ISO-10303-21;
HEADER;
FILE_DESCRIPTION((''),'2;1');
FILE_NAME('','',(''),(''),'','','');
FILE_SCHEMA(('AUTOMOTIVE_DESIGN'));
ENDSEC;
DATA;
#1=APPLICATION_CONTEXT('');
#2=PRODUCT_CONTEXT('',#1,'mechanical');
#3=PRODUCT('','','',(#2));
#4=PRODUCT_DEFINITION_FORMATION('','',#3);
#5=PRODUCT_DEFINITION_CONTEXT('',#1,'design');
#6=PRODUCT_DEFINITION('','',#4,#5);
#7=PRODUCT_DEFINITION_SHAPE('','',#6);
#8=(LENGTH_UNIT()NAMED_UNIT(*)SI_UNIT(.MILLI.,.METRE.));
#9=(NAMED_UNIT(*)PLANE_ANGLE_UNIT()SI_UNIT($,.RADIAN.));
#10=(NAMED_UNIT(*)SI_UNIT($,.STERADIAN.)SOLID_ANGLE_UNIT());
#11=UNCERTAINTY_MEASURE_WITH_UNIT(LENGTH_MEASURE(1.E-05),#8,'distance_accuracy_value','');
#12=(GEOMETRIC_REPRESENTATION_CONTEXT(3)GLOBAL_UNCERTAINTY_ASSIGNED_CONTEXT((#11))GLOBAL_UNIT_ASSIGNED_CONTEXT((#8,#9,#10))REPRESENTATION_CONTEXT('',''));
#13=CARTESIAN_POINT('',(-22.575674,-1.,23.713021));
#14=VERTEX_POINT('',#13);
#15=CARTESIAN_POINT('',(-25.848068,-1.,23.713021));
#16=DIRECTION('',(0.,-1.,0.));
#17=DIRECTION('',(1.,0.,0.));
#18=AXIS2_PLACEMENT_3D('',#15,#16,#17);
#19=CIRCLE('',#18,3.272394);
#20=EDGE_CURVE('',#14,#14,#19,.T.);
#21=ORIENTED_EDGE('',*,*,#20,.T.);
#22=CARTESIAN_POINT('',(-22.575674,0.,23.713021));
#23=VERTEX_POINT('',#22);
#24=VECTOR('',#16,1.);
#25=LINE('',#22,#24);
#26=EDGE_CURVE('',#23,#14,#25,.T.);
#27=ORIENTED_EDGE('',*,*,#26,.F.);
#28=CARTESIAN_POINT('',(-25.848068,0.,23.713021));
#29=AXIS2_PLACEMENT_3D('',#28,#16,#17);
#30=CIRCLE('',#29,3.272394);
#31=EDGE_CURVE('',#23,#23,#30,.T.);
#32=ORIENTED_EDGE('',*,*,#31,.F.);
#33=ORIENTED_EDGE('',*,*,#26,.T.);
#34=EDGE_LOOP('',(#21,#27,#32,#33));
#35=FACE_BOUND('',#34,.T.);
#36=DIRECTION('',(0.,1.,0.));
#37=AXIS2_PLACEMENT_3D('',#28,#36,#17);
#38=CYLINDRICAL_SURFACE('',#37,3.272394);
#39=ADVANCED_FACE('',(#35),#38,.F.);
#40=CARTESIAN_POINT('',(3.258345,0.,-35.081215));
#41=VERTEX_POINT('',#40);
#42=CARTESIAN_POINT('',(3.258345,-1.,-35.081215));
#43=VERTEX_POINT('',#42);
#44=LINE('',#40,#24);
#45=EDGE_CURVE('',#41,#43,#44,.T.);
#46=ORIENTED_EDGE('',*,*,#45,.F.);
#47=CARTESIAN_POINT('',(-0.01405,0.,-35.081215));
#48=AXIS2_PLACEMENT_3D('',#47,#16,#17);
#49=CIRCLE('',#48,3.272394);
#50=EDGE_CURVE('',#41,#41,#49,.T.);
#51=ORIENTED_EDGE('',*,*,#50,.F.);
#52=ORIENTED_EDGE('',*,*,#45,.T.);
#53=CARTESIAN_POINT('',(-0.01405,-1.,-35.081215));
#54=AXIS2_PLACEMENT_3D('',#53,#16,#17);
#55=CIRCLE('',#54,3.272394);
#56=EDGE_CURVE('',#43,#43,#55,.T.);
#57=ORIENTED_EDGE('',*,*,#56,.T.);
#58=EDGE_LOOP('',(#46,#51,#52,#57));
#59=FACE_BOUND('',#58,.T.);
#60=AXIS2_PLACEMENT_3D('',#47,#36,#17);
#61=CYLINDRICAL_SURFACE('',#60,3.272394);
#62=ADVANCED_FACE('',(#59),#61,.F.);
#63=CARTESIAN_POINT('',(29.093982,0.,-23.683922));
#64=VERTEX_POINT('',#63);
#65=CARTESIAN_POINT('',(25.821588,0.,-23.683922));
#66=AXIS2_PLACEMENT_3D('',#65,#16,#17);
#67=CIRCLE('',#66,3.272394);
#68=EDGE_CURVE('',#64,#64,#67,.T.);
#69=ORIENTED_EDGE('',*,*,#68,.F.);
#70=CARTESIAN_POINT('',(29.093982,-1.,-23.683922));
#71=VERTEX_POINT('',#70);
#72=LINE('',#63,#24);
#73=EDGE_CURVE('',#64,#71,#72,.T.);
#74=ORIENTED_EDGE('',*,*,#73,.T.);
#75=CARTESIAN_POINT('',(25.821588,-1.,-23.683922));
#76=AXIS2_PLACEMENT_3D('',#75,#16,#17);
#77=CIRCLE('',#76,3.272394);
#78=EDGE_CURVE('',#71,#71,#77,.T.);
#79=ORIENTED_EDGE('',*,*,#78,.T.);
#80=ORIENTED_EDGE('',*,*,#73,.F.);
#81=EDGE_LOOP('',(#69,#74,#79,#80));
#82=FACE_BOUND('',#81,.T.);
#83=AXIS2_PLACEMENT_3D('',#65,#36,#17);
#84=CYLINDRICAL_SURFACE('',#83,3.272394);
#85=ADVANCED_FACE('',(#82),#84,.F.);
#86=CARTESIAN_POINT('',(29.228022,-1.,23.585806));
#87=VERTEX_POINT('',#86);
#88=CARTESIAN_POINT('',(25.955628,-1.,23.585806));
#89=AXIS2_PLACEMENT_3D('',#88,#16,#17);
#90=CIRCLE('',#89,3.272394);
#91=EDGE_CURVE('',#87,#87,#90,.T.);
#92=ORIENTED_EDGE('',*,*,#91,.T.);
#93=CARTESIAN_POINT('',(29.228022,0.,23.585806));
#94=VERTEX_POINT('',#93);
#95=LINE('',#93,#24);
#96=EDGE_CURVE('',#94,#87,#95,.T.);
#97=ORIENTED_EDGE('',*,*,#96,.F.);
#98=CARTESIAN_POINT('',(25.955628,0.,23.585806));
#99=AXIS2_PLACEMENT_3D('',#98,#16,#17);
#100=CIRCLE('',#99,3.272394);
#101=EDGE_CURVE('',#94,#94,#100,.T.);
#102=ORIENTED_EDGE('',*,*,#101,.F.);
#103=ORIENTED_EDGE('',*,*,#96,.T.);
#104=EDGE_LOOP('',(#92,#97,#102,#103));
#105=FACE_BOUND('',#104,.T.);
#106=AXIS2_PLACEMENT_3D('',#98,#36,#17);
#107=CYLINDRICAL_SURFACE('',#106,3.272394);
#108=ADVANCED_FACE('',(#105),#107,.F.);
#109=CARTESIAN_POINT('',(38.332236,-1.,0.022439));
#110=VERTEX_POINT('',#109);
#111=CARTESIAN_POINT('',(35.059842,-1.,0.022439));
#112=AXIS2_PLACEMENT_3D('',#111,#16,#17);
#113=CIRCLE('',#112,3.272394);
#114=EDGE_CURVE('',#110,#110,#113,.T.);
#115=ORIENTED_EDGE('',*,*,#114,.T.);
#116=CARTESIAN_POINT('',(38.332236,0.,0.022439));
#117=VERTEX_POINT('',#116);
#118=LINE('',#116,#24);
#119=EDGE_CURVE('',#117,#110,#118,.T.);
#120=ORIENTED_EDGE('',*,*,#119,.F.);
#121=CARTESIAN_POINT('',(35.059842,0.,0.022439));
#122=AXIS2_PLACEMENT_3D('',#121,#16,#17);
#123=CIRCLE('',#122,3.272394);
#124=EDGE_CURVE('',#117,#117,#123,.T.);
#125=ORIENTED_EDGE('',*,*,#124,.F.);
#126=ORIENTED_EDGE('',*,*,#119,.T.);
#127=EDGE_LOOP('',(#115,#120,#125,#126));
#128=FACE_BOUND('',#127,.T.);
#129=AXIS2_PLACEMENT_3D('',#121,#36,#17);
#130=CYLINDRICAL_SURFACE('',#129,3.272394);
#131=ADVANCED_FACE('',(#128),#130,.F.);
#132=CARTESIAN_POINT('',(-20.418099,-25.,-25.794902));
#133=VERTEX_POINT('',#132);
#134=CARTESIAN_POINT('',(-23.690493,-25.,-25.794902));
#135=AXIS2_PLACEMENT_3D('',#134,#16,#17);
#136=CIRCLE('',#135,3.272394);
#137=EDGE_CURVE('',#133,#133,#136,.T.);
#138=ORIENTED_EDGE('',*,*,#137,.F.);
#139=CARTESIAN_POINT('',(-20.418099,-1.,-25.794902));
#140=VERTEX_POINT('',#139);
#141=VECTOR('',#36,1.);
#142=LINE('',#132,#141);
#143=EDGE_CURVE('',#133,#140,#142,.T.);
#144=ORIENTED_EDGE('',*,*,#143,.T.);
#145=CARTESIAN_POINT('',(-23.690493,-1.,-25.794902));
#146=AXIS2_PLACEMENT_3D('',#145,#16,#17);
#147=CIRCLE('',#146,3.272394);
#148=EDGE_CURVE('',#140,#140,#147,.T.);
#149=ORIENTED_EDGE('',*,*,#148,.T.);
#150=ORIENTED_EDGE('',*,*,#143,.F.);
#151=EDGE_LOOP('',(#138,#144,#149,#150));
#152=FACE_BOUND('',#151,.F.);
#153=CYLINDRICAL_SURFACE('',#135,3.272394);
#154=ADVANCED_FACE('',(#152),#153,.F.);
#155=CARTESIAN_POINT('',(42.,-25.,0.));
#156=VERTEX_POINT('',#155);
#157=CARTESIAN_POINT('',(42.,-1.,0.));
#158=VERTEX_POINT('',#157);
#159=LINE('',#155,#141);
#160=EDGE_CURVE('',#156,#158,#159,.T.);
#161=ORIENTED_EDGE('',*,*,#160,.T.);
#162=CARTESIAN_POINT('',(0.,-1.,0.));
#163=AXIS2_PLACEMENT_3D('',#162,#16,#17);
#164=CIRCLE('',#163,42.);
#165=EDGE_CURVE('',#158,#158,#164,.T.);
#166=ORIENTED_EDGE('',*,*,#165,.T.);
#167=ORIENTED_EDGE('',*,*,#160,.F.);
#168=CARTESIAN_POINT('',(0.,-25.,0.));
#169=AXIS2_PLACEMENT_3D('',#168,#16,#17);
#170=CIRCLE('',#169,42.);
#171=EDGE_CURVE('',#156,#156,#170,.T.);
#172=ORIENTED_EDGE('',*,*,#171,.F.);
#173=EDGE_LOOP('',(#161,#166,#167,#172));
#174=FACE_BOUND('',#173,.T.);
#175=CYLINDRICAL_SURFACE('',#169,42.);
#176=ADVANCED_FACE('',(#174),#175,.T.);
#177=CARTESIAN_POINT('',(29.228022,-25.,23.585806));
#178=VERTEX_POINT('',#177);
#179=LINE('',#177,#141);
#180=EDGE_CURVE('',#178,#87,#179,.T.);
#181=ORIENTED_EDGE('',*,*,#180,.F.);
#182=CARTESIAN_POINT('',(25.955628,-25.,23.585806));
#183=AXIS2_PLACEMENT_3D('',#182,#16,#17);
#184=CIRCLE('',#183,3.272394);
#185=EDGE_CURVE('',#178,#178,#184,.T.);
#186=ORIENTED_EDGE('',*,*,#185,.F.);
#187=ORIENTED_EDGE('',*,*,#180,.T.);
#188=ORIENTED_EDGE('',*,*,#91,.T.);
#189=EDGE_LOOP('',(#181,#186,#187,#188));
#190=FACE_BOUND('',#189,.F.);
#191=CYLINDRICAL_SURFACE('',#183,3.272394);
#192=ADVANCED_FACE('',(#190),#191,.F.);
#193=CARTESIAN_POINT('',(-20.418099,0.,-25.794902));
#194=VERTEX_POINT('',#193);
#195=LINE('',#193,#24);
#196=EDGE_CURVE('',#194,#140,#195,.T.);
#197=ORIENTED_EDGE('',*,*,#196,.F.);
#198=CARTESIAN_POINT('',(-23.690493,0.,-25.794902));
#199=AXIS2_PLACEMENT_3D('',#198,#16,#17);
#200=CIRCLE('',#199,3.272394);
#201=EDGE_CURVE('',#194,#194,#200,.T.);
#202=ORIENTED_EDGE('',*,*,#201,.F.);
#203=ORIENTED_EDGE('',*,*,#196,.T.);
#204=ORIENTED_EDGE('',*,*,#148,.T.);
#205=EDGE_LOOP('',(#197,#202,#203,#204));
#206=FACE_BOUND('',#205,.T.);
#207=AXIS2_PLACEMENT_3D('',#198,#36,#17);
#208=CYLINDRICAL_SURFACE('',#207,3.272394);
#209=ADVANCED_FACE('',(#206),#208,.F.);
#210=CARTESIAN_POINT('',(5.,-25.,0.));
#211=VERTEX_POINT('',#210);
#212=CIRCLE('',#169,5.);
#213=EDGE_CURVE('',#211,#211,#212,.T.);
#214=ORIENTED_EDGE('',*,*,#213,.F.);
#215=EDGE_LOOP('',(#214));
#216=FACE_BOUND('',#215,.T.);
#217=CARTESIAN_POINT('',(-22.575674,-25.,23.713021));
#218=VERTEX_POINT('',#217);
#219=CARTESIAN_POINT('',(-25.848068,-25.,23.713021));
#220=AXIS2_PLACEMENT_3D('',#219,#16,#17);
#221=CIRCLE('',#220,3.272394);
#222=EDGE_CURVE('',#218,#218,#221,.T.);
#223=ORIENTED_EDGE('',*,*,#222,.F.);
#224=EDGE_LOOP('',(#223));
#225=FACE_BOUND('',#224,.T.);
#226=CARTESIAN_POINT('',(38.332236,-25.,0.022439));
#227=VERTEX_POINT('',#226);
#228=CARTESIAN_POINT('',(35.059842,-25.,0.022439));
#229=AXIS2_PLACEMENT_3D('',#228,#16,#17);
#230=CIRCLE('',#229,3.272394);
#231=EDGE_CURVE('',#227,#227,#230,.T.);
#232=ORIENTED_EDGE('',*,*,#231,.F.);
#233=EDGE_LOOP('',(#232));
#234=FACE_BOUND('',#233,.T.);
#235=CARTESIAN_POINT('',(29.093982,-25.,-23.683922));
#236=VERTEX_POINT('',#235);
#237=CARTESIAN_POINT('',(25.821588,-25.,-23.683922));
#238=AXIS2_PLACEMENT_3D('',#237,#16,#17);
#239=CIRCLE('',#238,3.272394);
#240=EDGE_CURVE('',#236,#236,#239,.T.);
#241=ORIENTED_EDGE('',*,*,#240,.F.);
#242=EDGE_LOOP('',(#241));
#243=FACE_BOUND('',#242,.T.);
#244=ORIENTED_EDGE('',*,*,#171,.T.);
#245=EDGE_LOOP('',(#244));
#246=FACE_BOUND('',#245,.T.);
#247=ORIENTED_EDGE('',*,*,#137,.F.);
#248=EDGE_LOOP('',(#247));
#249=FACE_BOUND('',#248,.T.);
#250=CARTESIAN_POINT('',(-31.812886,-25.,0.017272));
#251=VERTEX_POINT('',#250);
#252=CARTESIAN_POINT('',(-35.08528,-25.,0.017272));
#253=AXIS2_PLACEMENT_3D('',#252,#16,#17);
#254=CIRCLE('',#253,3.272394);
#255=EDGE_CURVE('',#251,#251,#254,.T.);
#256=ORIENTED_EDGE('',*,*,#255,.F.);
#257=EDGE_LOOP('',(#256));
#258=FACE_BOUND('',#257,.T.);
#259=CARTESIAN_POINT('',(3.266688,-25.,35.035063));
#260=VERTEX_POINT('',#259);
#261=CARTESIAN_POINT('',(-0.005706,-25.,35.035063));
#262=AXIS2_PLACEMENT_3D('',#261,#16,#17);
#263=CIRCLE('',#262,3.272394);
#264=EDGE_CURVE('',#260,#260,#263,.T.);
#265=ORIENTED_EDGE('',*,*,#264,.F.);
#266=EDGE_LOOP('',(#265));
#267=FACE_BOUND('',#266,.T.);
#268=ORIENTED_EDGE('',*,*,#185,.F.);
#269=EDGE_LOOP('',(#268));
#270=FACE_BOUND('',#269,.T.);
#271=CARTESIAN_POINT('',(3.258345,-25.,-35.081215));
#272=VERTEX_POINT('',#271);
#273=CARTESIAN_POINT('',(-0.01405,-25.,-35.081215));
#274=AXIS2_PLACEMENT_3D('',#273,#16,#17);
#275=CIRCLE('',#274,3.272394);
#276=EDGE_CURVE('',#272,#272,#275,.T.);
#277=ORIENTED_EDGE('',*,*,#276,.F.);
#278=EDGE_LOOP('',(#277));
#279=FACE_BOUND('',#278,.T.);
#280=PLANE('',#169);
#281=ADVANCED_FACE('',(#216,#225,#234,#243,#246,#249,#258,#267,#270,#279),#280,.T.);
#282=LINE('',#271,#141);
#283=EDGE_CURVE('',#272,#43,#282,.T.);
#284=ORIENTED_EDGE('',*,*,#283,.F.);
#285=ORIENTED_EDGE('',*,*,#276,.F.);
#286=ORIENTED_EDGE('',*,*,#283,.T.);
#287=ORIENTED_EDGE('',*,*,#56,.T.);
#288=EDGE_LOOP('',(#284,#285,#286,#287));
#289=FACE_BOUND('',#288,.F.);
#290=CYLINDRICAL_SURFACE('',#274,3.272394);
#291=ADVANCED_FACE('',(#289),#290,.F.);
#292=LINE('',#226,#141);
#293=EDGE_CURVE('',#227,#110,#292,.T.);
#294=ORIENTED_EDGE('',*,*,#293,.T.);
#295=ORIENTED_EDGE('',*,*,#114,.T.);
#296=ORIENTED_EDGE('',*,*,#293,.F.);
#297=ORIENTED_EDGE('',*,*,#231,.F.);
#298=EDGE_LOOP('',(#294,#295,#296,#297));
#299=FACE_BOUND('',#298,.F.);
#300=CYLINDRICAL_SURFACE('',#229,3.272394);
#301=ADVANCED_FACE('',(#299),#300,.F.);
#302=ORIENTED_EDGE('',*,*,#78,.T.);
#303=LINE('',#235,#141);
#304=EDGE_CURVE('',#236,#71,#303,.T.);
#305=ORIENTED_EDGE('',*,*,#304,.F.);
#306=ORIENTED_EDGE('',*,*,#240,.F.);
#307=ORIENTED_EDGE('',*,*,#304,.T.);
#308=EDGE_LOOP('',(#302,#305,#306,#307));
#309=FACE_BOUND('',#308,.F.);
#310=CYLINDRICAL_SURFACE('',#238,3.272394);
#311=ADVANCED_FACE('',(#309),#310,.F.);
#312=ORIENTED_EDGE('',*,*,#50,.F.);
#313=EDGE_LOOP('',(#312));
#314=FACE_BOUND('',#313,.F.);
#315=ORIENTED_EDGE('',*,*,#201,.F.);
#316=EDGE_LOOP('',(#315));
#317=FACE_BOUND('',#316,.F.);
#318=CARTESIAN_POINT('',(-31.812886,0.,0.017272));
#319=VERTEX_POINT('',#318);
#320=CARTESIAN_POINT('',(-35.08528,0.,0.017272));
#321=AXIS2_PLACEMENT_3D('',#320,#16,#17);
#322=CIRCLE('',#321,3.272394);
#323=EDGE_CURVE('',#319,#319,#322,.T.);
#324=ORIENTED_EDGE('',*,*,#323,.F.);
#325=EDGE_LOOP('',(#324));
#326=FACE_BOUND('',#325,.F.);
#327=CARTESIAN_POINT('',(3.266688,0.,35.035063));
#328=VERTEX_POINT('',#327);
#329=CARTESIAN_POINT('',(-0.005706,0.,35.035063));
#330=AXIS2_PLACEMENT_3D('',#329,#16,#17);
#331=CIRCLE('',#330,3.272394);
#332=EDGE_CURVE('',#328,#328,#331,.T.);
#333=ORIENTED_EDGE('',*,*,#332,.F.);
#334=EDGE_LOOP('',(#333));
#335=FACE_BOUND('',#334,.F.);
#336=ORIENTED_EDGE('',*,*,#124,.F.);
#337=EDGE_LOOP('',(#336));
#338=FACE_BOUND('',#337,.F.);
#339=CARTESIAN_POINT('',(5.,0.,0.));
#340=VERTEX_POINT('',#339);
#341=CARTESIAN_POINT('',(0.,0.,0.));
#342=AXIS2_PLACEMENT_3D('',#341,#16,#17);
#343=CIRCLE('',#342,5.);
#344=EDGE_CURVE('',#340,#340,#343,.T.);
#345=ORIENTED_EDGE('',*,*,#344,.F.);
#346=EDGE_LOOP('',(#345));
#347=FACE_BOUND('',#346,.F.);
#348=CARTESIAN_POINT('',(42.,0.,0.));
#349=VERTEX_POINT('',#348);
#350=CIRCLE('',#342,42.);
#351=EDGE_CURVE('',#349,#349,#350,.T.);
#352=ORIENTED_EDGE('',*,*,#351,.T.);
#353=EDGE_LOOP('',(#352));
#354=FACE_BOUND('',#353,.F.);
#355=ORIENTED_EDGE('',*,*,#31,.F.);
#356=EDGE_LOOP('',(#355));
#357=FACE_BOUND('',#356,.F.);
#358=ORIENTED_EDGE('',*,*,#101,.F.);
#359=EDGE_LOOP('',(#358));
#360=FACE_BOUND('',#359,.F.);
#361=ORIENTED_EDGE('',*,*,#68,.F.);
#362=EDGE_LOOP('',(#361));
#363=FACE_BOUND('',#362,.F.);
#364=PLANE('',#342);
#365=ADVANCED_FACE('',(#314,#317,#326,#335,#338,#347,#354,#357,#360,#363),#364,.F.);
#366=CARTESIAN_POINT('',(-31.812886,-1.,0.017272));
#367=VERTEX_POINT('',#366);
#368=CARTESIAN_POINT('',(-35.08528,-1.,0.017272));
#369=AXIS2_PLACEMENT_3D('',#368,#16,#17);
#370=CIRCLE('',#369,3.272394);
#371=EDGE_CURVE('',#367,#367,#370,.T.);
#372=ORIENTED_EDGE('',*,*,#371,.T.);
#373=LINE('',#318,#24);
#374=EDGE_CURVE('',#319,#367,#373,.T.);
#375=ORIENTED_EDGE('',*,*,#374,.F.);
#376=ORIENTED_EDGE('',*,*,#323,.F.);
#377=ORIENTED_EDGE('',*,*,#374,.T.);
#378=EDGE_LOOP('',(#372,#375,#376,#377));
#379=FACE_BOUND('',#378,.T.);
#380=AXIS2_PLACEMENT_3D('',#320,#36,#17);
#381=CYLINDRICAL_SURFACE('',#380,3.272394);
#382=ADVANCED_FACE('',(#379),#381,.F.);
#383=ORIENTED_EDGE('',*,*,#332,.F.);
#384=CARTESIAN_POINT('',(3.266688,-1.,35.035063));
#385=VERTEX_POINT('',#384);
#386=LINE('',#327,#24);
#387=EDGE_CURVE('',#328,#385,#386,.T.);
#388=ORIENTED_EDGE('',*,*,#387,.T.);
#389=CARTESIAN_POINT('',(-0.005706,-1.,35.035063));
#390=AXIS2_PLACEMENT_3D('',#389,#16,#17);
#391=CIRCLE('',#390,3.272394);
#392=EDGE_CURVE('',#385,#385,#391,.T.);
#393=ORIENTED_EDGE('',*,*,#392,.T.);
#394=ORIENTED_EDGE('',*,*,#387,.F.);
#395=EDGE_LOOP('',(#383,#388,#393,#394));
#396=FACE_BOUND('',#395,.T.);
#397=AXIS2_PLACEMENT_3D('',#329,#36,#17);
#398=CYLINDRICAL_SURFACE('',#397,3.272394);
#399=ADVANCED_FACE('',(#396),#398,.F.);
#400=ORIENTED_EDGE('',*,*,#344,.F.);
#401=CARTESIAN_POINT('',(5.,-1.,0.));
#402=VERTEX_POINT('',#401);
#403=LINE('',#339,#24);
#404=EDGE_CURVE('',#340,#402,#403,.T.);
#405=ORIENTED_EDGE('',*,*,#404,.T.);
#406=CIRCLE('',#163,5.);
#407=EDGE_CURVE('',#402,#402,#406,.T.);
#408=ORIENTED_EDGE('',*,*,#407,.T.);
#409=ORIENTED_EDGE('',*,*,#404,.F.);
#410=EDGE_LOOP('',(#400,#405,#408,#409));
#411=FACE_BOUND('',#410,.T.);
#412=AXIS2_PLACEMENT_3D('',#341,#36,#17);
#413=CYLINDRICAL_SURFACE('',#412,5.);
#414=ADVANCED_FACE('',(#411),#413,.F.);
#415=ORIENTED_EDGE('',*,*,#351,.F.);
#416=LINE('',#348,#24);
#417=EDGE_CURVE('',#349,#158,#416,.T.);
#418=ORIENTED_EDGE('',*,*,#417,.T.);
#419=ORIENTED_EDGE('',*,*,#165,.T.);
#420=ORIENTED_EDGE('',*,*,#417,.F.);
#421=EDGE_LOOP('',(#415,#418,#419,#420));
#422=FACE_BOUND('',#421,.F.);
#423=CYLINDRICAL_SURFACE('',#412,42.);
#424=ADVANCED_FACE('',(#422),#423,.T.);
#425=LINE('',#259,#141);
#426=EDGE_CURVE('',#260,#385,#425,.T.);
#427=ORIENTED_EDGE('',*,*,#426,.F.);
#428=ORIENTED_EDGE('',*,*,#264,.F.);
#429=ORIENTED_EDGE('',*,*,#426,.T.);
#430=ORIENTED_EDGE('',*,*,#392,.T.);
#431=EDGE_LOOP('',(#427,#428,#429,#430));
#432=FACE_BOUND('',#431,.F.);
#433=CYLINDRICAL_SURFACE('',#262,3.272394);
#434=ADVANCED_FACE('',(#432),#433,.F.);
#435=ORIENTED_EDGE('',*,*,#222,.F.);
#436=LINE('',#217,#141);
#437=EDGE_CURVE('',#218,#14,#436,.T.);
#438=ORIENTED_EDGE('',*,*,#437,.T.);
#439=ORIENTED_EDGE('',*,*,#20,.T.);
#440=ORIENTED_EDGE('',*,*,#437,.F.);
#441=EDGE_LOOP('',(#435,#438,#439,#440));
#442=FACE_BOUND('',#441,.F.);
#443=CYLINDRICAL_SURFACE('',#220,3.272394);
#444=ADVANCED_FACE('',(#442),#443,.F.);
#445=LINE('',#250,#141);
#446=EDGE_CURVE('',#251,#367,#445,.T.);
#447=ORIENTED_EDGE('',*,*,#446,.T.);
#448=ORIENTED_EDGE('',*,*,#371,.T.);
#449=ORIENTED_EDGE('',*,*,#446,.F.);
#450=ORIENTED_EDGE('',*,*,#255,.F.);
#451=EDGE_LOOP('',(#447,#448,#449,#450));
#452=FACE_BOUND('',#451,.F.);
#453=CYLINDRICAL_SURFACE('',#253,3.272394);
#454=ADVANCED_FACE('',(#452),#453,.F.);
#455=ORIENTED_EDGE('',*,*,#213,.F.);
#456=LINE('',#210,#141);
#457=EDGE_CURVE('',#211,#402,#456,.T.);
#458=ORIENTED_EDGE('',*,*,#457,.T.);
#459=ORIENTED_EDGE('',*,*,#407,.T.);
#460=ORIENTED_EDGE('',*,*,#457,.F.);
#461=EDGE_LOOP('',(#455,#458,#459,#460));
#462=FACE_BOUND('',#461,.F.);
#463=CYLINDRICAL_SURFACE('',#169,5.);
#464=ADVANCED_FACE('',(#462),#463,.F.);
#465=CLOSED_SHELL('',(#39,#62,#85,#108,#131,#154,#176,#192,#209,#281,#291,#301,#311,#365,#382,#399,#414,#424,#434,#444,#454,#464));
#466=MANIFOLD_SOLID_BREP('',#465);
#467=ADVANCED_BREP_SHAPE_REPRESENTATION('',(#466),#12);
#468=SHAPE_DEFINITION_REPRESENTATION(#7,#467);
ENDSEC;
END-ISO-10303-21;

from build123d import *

# Parameters (mm, degrees)
F0_R     = 42
F0_R_2   = 3.2723941489
F0_R_3   = 15
F0_R_4   = 8.75
F1_DEPTH = 25
F0_R_5   = 5
F2_DEPTH = 25
F7_DEPTH = 24


# Not quite as in the source:
# - the program builds the solid bodies; features that only make, move or delete a surface that nothing else refers to are left out


with BuildPart() as f1:
    # F0 (on Front) → F1 (new body)
    with BuildSketch(Plane.XZ):
        Circle(F0_R)
        with Locations((-23.6904930325, -25.7949024873)):
            Circle(F0_R_2, mode=Mode.SUBTRACT)
        with Locations((-0.0140495196, -35.0812149592)):
            Circle(F0_R_2, mode=Mode.SUBTRACT)
        with Locations((25.8215879073, -23.6839220737)):
            Circle(F0_R_2, mode=Mode.SUBTRACT)
        with Locations((-35.0852801235, 0.0172716529)):
            Circle(F0_R_2, mode=Mode.SUBTRACT)
        with Locations((-25.8480679978, 23.7130210266)):
            Circle(F0_R_2, mode=Mode.SUBTRACT)
        with Locations((-0.0057062035, 35.0350632497)):
            Circle(F0_R_2, mode=Mode.SUBTRACT)
        Circle(F0_R_3, mode=Mode.SUBTRACT)
        with Locations((35.0598417296, 0.0224386821)):
            Circle(F0_R_2, mode=Mode.SUBTRACT)
        with Locations((25.9556279527, 23.5858062447)):
            Circle(F0_R_2, mode=Mode.SUBTRACT)
        Circle(F0_R_3)
        Circle(F0_R_4, mode=Mode.SUBTRACT)
    extrude(amount=F1_DEPTH)

    # F0 (on Front) → F2 (join)
    with BuildSketch(Plane.XZ):
        Circle(F0_R_4)
        Circle(F0_R_5, mode=Mode.SUBTRACT)
    extrude(amount=F2_DEPTH)

    # F7 (add): a face of the model
    f7_faces = [f1.faces().sort_by_distance(p)[0] for p in [
        (-40.8120606076, -25, 0),
    ]]
    extrude(f7_faces, amount=-F7_DEPTH)


solid = f1.part
